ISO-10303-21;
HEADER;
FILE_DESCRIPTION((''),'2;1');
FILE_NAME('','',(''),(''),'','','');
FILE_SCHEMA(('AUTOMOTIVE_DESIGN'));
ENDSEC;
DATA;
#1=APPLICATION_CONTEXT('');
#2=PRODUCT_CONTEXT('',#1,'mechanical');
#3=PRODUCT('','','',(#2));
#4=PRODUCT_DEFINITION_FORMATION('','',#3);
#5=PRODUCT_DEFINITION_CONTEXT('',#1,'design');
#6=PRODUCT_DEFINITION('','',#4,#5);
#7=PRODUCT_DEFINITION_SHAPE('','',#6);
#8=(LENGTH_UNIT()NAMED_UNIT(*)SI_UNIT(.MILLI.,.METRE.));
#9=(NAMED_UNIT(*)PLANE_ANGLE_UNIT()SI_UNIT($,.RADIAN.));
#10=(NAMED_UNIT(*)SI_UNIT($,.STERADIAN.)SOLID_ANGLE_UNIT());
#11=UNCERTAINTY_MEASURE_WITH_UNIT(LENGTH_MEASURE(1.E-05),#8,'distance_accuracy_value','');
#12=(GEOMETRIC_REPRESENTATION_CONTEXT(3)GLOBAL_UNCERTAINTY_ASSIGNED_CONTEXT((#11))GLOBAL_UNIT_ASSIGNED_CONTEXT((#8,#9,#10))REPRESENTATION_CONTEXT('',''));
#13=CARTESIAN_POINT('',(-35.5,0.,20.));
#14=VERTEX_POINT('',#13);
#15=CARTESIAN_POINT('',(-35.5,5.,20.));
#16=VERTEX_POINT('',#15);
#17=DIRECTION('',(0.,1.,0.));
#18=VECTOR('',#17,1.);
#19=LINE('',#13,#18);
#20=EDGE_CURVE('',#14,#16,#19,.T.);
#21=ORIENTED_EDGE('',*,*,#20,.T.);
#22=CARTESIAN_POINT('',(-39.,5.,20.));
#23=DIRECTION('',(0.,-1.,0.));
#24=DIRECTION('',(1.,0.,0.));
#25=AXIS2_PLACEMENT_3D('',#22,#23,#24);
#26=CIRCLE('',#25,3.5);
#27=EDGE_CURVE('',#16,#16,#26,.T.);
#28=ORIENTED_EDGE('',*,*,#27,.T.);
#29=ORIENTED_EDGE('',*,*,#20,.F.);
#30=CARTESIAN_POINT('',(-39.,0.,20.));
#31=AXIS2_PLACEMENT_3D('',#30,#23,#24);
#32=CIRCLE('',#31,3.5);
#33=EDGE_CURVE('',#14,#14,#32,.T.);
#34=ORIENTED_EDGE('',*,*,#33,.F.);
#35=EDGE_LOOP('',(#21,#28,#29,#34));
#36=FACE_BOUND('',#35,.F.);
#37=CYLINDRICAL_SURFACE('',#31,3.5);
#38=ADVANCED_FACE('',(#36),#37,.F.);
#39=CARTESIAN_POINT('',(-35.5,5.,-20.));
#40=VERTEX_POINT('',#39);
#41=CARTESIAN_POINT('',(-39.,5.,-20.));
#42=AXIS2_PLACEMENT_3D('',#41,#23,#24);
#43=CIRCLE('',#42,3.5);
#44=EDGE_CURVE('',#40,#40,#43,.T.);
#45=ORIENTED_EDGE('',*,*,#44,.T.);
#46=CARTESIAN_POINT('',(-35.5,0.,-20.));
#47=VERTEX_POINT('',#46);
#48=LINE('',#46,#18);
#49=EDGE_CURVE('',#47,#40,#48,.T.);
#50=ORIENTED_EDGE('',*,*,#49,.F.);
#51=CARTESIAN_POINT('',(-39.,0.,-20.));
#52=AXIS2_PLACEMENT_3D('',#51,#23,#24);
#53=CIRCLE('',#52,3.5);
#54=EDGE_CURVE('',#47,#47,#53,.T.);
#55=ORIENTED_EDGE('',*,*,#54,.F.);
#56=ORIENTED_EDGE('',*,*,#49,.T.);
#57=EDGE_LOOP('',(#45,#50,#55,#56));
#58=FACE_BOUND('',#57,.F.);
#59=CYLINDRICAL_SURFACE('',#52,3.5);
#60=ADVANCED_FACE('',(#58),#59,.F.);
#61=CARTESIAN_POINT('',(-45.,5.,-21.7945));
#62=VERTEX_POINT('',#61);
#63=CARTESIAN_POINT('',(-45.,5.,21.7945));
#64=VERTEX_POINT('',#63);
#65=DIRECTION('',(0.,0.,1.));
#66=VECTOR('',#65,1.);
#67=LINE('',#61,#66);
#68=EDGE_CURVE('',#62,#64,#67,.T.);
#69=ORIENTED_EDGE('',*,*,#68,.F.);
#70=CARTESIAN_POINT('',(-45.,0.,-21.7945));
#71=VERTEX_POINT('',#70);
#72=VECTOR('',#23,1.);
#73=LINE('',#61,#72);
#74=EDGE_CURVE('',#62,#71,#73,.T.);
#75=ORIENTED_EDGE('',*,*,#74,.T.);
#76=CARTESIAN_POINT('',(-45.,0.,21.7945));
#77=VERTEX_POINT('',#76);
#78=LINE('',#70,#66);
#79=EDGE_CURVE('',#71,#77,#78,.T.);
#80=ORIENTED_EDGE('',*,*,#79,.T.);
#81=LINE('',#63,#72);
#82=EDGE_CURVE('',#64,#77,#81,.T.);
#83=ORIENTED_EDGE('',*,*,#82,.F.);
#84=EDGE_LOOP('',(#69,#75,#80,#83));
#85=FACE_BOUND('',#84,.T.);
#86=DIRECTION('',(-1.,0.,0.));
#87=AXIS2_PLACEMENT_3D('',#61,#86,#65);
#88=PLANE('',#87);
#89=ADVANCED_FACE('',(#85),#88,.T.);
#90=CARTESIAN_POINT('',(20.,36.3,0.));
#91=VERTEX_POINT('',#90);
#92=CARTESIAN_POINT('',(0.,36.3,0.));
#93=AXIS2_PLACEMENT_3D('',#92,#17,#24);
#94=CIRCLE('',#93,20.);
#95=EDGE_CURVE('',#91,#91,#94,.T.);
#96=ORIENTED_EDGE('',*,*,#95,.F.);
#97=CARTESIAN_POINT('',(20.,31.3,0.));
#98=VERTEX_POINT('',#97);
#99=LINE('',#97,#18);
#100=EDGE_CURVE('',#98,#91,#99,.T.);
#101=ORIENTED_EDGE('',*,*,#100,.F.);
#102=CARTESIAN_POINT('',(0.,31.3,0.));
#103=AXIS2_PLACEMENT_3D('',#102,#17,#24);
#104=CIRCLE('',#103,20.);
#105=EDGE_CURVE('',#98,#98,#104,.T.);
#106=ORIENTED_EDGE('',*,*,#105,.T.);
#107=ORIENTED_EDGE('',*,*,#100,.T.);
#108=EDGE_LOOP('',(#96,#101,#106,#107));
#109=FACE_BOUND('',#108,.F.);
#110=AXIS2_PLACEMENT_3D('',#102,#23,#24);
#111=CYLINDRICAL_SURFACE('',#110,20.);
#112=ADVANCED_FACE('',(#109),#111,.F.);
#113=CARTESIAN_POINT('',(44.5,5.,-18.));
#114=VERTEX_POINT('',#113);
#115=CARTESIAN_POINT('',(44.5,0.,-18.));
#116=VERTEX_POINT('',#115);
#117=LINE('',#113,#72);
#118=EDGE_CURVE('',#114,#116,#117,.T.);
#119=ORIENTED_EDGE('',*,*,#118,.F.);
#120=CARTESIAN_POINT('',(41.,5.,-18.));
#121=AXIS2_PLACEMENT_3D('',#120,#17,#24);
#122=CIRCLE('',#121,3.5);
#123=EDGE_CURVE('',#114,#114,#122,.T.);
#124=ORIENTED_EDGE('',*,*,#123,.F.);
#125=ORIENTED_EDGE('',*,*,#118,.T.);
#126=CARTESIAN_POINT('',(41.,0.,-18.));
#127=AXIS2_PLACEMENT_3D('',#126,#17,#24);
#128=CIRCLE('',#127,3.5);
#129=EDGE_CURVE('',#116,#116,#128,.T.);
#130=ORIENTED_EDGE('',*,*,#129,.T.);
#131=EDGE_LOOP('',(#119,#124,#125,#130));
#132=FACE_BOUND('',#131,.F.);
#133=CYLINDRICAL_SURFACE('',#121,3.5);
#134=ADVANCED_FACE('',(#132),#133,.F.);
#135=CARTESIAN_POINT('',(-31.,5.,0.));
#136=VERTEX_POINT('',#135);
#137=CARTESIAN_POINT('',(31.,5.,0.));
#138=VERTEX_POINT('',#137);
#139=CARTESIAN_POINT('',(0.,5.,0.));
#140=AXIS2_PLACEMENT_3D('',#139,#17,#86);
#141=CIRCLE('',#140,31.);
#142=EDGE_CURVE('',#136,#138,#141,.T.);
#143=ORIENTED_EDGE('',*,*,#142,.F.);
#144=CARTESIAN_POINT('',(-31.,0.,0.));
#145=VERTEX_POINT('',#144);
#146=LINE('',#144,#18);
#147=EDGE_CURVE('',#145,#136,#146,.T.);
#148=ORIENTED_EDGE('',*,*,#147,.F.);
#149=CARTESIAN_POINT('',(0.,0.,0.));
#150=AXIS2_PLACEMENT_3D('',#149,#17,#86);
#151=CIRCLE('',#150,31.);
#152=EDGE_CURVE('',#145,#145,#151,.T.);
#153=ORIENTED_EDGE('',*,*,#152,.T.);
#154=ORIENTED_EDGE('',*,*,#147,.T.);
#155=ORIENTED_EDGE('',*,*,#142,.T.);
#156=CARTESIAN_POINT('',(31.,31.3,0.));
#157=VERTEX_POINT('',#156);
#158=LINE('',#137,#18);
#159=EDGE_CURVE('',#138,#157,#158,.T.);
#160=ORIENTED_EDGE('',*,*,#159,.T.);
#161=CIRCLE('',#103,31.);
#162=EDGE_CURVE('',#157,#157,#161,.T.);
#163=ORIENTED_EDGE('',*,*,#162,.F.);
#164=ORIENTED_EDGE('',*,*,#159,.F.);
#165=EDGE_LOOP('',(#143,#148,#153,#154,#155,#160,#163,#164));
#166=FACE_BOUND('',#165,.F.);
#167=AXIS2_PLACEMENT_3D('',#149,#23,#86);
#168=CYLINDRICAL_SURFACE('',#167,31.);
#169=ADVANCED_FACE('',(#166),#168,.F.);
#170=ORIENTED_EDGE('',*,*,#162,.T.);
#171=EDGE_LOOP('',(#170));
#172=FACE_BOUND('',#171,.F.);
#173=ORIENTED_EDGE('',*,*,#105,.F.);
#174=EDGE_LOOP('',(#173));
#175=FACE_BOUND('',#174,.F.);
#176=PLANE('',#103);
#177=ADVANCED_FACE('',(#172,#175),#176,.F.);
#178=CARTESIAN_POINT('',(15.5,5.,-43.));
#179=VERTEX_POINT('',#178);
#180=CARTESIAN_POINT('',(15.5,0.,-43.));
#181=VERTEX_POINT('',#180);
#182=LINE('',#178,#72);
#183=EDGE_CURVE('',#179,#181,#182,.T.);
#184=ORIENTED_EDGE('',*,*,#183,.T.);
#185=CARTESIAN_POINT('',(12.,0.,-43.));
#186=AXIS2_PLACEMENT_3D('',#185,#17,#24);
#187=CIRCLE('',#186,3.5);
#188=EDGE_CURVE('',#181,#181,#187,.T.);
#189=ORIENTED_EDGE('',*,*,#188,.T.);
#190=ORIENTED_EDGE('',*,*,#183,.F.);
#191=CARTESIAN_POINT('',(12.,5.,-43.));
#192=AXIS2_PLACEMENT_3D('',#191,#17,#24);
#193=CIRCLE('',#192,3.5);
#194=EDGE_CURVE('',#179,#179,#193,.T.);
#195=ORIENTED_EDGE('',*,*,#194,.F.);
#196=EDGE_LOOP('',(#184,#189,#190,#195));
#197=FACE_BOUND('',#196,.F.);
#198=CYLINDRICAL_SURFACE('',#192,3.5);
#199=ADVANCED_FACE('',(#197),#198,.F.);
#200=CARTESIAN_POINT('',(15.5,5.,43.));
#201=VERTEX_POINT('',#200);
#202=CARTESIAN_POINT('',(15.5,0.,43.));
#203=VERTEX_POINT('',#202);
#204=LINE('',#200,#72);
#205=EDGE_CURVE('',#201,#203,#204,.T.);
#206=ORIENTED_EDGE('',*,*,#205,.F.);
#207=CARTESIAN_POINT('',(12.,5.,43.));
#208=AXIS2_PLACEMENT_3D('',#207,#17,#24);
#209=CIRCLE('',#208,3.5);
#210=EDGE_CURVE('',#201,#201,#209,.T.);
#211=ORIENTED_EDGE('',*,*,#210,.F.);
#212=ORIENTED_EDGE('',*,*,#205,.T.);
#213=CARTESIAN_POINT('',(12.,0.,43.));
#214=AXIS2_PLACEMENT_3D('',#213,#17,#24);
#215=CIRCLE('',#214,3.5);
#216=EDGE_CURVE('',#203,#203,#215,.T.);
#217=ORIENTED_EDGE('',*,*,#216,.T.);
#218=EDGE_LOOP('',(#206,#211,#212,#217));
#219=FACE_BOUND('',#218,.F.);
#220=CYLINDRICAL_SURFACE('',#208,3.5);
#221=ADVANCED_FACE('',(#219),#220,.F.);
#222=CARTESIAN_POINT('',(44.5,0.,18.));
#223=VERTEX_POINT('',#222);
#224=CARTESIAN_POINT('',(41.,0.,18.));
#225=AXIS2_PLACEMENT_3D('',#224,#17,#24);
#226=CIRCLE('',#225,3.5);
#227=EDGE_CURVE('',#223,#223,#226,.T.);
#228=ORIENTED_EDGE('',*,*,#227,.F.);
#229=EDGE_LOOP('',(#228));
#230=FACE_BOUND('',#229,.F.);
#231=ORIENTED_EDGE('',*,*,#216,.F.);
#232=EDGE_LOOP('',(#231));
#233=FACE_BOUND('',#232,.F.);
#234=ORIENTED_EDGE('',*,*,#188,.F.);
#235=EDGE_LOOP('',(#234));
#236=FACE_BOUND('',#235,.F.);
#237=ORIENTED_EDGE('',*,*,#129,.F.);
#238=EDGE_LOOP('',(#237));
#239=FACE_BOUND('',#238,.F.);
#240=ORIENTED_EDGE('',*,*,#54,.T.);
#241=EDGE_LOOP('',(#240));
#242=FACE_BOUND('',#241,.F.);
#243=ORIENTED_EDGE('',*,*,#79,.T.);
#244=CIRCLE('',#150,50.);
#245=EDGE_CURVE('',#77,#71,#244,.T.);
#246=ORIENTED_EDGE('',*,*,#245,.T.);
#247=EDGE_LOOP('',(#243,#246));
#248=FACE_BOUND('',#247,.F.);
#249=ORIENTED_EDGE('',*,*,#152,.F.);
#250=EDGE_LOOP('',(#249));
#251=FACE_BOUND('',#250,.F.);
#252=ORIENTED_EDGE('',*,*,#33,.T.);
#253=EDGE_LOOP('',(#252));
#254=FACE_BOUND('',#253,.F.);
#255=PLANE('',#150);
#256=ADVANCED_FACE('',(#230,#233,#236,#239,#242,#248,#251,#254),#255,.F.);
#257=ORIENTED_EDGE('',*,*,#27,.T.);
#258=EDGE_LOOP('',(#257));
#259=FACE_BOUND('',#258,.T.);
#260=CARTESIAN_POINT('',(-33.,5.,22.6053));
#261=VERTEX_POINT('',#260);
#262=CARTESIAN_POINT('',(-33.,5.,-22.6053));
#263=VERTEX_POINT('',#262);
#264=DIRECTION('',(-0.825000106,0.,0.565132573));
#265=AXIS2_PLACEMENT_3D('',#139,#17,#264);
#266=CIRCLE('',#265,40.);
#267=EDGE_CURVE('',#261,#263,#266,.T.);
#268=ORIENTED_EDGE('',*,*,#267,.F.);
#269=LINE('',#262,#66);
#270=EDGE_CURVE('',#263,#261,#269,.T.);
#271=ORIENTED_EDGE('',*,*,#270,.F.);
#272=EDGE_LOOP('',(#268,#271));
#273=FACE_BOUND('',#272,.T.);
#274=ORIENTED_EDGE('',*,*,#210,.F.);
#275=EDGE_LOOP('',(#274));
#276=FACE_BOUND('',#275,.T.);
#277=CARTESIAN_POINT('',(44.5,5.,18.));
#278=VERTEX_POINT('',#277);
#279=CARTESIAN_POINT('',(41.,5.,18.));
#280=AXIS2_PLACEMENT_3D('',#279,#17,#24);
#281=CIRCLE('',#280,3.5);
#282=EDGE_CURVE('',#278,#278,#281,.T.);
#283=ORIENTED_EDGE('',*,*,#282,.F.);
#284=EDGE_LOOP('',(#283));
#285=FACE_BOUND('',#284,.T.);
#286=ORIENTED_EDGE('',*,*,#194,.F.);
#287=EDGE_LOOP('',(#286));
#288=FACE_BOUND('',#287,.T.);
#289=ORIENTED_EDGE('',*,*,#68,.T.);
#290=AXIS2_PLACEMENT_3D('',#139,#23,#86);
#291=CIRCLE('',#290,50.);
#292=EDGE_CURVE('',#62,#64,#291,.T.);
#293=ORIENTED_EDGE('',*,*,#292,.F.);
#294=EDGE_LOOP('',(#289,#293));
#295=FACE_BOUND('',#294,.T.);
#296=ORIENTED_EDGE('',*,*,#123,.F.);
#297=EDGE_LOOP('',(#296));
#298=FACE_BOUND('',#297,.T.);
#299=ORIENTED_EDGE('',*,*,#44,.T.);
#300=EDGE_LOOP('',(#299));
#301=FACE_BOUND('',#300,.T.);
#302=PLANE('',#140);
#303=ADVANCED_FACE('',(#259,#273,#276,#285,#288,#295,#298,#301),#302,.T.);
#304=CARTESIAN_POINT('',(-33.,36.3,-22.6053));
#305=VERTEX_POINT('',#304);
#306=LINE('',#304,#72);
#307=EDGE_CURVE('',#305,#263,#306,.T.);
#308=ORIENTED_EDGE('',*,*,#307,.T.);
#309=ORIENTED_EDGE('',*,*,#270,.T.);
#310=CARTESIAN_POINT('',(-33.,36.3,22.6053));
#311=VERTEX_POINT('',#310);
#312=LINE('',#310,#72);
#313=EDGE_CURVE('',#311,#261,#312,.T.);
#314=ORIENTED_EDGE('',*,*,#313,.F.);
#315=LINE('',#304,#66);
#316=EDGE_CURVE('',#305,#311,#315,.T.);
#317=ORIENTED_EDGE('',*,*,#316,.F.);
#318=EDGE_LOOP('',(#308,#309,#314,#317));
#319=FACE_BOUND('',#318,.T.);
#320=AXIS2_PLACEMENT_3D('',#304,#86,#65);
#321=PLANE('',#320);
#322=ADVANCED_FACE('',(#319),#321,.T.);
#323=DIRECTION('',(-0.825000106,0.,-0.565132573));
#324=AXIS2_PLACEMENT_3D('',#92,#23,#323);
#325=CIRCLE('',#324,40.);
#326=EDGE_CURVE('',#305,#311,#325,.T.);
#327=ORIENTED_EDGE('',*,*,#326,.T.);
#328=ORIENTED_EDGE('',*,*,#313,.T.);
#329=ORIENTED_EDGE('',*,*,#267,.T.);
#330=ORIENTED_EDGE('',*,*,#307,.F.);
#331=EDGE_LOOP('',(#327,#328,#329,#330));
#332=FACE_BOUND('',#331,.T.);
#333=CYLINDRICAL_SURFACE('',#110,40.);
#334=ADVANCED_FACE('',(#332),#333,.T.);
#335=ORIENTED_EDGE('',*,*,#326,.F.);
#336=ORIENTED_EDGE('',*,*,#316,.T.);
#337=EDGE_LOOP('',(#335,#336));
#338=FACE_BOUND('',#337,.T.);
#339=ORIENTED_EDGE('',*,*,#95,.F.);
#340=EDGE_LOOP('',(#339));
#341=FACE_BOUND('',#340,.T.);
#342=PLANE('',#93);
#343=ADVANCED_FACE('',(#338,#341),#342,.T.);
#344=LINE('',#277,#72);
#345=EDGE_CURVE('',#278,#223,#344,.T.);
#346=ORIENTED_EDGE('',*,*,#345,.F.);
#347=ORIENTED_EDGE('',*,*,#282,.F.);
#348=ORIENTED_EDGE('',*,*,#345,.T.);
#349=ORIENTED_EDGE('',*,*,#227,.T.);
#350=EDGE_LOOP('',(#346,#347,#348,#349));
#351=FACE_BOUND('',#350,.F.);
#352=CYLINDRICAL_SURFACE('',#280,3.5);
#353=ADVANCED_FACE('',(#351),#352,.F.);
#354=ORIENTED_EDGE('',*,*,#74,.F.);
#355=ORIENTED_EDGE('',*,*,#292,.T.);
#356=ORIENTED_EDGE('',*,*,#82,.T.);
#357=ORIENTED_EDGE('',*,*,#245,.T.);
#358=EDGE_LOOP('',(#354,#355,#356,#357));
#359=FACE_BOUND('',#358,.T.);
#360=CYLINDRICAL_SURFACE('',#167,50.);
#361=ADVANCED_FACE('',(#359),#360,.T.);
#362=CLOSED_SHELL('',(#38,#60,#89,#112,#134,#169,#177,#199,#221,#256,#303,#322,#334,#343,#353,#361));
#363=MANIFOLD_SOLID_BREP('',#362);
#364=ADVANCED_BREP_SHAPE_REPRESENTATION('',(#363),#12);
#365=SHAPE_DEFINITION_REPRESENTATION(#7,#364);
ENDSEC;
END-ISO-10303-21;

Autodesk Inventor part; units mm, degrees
ref_plane "YZ Plane" through (0, 0, 0) normal (1, 0, 0) x (0, 1, 0)
ref_plane "XZ Plane" through (0, 0, 0) normal (0, 1, 0) x (-1, 0, 0)
ref_plane "XY Plane" through (0, 0, 0) normal (0, 0, 1) x (1, 0, 0)
sketch "Esquisse1" plane through (0, 0, 0) normal (0, 1, 0) x (-1, 0, 0)
  circle A0 centre (0, 0) radius 31
  circle A1 centre (0, 0) radius 50
  circle A2 centre (0, 0) radius 40
  line L0 (45, -21.7945) -> (45, 21.7945)
  dimension "d0" = 62
  dimension "d1" = 100
  dimension "d2" = 80
  dimension "d47" = 45
extrude "Extrusion1" add sketch "Esquisse1" along normal blind 5 contours A1 L0 | L0 A1 | A2
sketch "Esquisse2" plane through (0, 5, 0) normal (0, 1, 0) x (1, 0, 0)
  circle A0 centre (0, 0) radius 40
  circle A1 centre (0, 0) radius 31 projected
  circle A2 centre (0, 0) radius 31
  dimension "d6" = 80
  dimension "d75" = 0
extrude "Extrusion2" add sketch "Esquisse2" along normal blind 26.3
sketch "Esquisse3" plane through (0, 31.3, 0) normal (0, 1, 0) x (1, 0, 0)
  circle A0 centre (0, 0) radius 20
  circle A1 centre (0, 0) radius 40
  circle A2 centre (0, 0) radius 40 projected
  dimension "d9" = 40
  dimension "d63" = 0
extrude "Extrusion3" add sketch "Esquisse3" along normal blind 5
sketch "Esquisse5" plane through (0, 36.3, 0) normal (0, 1, 0) x (1, 0, 0)
  line L0 (-33, 22.6053) -> (-33, -22.6053)
  circle A0 centre (0, 0) radius 40
  circle A1 centre (0, 0) radius 40 projected
  point P0 (-33, 22.6053)
  dimension "d71" = 80
  dimension "d72" = 33
extrude "Extrusion4" cut sketch "Esquisse5" against normal up to surface (31.3 mm away) contours L0 A0 picked at (-34.2788, -5.1971)
sketch "Esquisse6" plane through (0, 5, 0) normal (0, 1, 0) x (1, 0, 0)
  point P0 (0, 0)
sketch "Esquisse7" plane through (0, 5, 0) normal (0, 1, 0) x (1, 0, 0)
  line L0 (12, 65.0926) -> (12, -68.5298) construction
  circle A0 centre (0, 0) radius 20 construction
  circle A1 centre (12, 43) radius 3.5
  circle A2 centre (12, -43) radius 3.5
  point P0 (-37.5, -12.5)
  point P1 (-37.5, 12.5)
  dimension "d53" = 12
  dimension "d54" = 7
  dimension "d55" = 7
  dimension "d56" = 43
  dimension "d57" = 43
extrude "Extrusion6" cut sketch "Esquisse7" against normal blind 10
sketch "Esquisse8" plane through (0, 5, 0) normal (0, 1, 0) x (1, 0, 0)
  line L0 (-45, 21.7945) -> (-45, -21.7945)
  circle A0 centre (0, 0) radius 50
  dimension "d73" = 45
  dimension "d74" = 100
extrude "Extrusion7" cut sketch "Esquisse8" against normal blind 5 contours L0 A0 picked at (-46.0601, 4.4554)
sketch "Esquisse9" plane through (0, 5, 0) normal (0, 1, 0) x (1, 0, 0)
  line L0 (41, 168.1574) -> (41, -90.4051) construction
  circle A0 centre (41, 18) radius 3.5
  circle A1 centre (41, -18) radius 3.5
  circle A2 centre (0, 0) radius 20 projected
  dimension "d58" = 7
  dimension "d59" = 7
  dimension "d60" = 18
  dimension "d61" = 18
  dimension "d62" = 41
extrude "Extrusion8" cut sketch "Esquisse9" against normal blind 5 contours A0 | A1
sketch "Sketch10" plane through (0, 0, 0) normal (0, -1, 0) x (1, 0, 0)
  line L0 (-39, -54.8136) -> (-39, 70.7566) construction
  circle A0 centre (-39, -20) radius 3.5
  circle A1 centre (-39, 20) radius 3.5
  point P0 (0, 0)
  dimension "d64" = 39
  dimension "d65" = 20
  dimension "d66" = 20
  dimension "d67" = 7
  dimension "d68" = 7
extrude "Extrusion9" cut sketch "Sketch10" against normal blind 5
equation "\"d55\" = d54"
equation "\"d57\" = d56"
equation "\"d59\" = d58"
equation "\"d61\" = d60"
equation "\"d68\" = d67"
properties part number "B1 fixe2"
